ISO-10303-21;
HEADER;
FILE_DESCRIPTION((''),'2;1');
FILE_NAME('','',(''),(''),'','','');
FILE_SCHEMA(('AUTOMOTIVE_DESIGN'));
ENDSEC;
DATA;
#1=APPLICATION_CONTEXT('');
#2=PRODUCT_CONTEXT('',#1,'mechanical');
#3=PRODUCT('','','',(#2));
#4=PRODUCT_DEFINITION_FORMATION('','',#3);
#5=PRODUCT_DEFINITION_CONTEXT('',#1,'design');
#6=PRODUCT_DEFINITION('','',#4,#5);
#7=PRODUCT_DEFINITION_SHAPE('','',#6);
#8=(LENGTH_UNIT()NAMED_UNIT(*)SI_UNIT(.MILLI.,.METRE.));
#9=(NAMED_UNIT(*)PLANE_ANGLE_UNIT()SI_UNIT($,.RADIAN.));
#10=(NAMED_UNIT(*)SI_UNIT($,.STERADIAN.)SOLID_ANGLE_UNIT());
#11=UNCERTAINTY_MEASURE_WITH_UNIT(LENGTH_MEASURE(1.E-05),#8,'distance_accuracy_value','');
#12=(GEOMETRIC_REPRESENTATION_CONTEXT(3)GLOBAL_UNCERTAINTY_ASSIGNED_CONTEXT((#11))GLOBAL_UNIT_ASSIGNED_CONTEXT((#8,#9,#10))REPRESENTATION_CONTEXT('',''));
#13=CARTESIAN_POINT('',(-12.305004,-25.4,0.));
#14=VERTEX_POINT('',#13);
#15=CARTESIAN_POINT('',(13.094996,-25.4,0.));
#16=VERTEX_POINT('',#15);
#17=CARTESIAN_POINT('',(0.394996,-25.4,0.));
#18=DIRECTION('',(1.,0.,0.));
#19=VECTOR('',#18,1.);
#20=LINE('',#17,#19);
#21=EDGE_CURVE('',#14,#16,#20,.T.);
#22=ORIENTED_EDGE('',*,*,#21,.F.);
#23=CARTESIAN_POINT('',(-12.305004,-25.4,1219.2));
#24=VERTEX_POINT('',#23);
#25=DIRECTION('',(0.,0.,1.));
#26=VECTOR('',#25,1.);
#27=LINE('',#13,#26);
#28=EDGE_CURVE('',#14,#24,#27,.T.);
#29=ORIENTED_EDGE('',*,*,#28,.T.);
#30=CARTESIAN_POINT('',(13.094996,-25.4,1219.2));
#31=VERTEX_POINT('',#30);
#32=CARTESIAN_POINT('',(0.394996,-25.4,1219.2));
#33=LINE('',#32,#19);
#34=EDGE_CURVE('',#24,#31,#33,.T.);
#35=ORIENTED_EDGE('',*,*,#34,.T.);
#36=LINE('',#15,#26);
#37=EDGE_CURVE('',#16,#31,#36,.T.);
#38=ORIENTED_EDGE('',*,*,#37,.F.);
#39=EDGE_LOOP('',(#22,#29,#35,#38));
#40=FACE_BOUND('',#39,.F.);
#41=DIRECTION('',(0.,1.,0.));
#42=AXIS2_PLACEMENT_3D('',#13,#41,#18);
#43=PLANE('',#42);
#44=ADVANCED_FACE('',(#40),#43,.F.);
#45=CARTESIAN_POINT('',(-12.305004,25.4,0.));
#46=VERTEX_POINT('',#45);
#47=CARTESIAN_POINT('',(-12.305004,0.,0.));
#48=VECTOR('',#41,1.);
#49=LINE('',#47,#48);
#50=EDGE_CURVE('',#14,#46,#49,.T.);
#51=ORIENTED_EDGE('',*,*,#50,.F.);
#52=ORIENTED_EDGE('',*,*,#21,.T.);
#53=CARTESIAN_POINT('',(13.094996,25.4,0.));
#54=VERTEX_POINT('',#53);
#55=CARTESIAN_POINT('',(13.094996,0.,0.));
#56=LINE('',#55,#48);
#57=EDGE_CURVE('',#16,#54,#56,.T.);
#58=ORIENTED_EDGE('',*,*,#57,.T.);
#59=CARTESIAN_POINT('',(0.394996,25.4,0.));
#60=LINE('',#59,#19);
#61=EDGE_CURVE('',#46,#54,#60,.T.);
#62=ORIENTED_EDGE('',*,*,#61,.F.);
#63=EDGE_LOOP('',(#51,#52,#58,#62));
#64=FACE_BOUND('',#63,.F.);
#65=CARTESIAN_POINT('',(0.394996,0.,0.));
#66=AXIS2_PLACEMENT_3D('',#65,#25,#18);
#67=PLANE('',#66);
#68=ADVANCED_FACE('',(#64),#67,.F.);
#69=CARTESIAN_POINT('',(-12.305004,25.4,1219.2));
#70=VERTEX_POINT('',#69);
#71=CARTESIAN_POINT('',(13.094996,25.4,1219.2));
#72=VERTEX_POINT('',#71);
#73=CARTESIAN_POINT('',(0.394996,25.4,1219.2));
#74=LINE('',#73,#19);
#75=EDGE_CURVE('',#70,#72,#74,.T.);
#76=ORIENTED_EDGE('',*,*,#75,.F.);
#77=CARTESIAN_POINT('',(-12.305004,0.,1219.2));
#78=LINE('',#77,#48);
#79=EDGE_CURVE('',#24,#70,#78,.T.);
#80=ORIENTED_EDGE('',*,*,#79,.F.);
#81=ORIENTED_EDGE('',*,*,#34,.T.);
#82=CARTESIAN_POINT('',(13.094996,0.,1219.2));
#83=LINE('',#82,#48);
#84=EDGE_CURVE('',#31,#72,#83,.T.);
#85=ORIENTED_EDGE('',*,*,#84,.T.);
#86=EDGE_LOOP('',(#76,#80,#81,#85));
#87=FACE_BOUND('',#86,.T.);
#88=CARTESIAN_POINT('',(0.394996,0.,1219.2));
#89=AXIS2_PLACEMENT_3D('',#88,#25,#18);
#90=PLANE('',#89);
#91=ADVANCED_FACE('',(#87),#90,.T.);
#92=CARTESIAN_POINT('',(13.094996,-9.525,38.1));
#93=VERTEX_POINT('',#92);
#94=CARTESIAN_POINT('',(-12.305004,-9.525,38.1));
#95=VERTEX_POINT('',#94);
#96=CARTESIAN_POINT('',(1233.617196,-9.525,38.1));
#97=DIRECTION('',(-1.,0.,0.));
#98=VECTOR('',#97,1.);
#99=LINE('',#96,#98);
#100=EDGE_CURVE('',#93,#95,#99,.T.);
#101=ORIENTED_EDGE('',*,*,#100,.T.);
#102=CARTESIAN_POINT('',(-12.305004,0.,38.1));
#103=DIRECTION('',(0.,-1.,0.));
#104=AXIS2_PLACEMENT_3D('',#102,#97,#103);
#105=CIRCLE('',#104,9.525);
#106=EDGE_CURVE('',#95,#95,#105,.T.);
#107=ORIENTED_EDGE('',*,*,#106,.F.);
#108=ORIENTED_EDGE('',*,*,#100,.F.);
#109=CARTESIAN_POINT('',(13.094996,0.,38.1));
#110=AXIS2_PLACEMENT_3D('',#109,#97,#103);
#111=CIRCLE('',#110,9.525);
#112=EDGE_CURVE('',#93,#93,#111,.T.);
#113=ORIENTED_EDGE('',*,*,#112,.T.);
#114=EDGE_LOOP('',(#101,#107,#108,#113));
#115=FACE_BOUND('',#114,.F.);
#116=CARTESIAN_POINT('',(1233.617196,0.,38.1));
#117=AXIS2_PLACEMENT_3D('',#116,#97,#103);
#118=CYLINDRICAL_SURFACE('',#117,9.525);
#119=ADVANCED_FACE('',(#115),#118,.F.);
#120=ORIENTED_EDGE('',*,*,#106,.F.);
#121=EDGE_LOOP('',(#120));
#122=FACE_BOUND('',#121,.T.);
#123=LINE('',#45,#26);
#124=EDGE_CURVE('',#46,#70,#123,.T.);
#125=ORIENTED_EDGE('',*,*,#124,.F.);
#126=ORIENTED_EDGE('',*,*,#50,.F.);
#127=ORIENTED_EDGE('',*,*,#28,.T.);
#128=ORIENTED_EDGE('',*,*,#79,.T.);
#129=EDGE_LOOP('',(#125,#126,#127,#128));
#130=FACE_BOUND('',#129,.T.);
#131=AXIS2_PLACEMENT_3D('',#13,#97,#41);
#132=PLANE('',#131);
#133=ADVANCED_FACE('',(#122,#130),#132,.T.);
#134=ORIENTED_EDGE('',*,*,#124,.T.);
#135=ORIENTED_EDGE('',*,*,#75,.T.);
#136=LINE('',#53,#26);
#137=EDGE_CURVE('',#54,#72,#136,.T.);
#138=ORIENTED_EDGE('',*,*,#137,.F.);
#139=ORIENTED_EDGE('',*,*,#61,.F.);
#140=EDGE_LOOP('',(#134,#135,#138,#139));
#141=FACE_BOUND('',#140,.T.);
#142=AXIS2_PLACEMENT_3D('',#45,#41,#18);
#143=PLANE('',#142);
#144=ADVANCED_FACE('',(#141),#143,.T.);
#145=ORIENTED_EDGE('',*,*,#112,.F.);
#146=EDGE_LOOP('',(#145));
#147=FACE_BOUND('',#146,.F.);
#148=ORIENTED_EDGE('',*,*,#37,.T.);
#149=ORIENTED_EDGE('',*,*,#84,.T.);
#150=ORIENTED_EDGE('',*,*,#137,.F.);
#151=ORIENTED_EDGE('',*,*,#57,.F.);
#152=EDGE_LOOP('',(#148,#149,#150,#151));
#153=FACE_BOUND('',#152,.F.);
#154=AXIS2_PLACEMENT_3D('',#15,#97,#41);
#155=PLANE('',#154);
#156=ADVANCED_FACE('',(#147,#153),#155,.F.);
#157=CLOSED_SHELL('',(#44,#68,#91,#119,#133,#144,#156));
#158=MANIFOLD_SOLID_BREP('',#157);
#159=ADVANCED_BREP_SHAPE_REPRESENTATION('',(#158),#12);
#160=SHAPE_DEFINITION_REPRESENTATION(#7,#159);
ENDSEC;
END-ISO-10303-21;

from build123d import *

# Parameters (mm, degrees)
F0_W     = 25.4
F0_H     = 50.8
F1_DEPTH = 1219.2
F3_D     = 19.05


# Not quite as in the source:
# - a feature names something its author has since deleted; it is built from what else it names


with BuildPart() as f1:
    # F0 (on Top) → F1 (new body)
    with BuildSketch(Plane.XY):
        with Locations((0.3949962629, 0)):
            Rectangle(F0_W, F0_H)
    extrude(amount=F1_DEPTH)

    # F3 (through all)
    with Locations(Plane.YZ.offset(13.0949962629)):
        with Locations((0, 38.1)):
            Hole(F3_D / 2)


solid = f1.part
